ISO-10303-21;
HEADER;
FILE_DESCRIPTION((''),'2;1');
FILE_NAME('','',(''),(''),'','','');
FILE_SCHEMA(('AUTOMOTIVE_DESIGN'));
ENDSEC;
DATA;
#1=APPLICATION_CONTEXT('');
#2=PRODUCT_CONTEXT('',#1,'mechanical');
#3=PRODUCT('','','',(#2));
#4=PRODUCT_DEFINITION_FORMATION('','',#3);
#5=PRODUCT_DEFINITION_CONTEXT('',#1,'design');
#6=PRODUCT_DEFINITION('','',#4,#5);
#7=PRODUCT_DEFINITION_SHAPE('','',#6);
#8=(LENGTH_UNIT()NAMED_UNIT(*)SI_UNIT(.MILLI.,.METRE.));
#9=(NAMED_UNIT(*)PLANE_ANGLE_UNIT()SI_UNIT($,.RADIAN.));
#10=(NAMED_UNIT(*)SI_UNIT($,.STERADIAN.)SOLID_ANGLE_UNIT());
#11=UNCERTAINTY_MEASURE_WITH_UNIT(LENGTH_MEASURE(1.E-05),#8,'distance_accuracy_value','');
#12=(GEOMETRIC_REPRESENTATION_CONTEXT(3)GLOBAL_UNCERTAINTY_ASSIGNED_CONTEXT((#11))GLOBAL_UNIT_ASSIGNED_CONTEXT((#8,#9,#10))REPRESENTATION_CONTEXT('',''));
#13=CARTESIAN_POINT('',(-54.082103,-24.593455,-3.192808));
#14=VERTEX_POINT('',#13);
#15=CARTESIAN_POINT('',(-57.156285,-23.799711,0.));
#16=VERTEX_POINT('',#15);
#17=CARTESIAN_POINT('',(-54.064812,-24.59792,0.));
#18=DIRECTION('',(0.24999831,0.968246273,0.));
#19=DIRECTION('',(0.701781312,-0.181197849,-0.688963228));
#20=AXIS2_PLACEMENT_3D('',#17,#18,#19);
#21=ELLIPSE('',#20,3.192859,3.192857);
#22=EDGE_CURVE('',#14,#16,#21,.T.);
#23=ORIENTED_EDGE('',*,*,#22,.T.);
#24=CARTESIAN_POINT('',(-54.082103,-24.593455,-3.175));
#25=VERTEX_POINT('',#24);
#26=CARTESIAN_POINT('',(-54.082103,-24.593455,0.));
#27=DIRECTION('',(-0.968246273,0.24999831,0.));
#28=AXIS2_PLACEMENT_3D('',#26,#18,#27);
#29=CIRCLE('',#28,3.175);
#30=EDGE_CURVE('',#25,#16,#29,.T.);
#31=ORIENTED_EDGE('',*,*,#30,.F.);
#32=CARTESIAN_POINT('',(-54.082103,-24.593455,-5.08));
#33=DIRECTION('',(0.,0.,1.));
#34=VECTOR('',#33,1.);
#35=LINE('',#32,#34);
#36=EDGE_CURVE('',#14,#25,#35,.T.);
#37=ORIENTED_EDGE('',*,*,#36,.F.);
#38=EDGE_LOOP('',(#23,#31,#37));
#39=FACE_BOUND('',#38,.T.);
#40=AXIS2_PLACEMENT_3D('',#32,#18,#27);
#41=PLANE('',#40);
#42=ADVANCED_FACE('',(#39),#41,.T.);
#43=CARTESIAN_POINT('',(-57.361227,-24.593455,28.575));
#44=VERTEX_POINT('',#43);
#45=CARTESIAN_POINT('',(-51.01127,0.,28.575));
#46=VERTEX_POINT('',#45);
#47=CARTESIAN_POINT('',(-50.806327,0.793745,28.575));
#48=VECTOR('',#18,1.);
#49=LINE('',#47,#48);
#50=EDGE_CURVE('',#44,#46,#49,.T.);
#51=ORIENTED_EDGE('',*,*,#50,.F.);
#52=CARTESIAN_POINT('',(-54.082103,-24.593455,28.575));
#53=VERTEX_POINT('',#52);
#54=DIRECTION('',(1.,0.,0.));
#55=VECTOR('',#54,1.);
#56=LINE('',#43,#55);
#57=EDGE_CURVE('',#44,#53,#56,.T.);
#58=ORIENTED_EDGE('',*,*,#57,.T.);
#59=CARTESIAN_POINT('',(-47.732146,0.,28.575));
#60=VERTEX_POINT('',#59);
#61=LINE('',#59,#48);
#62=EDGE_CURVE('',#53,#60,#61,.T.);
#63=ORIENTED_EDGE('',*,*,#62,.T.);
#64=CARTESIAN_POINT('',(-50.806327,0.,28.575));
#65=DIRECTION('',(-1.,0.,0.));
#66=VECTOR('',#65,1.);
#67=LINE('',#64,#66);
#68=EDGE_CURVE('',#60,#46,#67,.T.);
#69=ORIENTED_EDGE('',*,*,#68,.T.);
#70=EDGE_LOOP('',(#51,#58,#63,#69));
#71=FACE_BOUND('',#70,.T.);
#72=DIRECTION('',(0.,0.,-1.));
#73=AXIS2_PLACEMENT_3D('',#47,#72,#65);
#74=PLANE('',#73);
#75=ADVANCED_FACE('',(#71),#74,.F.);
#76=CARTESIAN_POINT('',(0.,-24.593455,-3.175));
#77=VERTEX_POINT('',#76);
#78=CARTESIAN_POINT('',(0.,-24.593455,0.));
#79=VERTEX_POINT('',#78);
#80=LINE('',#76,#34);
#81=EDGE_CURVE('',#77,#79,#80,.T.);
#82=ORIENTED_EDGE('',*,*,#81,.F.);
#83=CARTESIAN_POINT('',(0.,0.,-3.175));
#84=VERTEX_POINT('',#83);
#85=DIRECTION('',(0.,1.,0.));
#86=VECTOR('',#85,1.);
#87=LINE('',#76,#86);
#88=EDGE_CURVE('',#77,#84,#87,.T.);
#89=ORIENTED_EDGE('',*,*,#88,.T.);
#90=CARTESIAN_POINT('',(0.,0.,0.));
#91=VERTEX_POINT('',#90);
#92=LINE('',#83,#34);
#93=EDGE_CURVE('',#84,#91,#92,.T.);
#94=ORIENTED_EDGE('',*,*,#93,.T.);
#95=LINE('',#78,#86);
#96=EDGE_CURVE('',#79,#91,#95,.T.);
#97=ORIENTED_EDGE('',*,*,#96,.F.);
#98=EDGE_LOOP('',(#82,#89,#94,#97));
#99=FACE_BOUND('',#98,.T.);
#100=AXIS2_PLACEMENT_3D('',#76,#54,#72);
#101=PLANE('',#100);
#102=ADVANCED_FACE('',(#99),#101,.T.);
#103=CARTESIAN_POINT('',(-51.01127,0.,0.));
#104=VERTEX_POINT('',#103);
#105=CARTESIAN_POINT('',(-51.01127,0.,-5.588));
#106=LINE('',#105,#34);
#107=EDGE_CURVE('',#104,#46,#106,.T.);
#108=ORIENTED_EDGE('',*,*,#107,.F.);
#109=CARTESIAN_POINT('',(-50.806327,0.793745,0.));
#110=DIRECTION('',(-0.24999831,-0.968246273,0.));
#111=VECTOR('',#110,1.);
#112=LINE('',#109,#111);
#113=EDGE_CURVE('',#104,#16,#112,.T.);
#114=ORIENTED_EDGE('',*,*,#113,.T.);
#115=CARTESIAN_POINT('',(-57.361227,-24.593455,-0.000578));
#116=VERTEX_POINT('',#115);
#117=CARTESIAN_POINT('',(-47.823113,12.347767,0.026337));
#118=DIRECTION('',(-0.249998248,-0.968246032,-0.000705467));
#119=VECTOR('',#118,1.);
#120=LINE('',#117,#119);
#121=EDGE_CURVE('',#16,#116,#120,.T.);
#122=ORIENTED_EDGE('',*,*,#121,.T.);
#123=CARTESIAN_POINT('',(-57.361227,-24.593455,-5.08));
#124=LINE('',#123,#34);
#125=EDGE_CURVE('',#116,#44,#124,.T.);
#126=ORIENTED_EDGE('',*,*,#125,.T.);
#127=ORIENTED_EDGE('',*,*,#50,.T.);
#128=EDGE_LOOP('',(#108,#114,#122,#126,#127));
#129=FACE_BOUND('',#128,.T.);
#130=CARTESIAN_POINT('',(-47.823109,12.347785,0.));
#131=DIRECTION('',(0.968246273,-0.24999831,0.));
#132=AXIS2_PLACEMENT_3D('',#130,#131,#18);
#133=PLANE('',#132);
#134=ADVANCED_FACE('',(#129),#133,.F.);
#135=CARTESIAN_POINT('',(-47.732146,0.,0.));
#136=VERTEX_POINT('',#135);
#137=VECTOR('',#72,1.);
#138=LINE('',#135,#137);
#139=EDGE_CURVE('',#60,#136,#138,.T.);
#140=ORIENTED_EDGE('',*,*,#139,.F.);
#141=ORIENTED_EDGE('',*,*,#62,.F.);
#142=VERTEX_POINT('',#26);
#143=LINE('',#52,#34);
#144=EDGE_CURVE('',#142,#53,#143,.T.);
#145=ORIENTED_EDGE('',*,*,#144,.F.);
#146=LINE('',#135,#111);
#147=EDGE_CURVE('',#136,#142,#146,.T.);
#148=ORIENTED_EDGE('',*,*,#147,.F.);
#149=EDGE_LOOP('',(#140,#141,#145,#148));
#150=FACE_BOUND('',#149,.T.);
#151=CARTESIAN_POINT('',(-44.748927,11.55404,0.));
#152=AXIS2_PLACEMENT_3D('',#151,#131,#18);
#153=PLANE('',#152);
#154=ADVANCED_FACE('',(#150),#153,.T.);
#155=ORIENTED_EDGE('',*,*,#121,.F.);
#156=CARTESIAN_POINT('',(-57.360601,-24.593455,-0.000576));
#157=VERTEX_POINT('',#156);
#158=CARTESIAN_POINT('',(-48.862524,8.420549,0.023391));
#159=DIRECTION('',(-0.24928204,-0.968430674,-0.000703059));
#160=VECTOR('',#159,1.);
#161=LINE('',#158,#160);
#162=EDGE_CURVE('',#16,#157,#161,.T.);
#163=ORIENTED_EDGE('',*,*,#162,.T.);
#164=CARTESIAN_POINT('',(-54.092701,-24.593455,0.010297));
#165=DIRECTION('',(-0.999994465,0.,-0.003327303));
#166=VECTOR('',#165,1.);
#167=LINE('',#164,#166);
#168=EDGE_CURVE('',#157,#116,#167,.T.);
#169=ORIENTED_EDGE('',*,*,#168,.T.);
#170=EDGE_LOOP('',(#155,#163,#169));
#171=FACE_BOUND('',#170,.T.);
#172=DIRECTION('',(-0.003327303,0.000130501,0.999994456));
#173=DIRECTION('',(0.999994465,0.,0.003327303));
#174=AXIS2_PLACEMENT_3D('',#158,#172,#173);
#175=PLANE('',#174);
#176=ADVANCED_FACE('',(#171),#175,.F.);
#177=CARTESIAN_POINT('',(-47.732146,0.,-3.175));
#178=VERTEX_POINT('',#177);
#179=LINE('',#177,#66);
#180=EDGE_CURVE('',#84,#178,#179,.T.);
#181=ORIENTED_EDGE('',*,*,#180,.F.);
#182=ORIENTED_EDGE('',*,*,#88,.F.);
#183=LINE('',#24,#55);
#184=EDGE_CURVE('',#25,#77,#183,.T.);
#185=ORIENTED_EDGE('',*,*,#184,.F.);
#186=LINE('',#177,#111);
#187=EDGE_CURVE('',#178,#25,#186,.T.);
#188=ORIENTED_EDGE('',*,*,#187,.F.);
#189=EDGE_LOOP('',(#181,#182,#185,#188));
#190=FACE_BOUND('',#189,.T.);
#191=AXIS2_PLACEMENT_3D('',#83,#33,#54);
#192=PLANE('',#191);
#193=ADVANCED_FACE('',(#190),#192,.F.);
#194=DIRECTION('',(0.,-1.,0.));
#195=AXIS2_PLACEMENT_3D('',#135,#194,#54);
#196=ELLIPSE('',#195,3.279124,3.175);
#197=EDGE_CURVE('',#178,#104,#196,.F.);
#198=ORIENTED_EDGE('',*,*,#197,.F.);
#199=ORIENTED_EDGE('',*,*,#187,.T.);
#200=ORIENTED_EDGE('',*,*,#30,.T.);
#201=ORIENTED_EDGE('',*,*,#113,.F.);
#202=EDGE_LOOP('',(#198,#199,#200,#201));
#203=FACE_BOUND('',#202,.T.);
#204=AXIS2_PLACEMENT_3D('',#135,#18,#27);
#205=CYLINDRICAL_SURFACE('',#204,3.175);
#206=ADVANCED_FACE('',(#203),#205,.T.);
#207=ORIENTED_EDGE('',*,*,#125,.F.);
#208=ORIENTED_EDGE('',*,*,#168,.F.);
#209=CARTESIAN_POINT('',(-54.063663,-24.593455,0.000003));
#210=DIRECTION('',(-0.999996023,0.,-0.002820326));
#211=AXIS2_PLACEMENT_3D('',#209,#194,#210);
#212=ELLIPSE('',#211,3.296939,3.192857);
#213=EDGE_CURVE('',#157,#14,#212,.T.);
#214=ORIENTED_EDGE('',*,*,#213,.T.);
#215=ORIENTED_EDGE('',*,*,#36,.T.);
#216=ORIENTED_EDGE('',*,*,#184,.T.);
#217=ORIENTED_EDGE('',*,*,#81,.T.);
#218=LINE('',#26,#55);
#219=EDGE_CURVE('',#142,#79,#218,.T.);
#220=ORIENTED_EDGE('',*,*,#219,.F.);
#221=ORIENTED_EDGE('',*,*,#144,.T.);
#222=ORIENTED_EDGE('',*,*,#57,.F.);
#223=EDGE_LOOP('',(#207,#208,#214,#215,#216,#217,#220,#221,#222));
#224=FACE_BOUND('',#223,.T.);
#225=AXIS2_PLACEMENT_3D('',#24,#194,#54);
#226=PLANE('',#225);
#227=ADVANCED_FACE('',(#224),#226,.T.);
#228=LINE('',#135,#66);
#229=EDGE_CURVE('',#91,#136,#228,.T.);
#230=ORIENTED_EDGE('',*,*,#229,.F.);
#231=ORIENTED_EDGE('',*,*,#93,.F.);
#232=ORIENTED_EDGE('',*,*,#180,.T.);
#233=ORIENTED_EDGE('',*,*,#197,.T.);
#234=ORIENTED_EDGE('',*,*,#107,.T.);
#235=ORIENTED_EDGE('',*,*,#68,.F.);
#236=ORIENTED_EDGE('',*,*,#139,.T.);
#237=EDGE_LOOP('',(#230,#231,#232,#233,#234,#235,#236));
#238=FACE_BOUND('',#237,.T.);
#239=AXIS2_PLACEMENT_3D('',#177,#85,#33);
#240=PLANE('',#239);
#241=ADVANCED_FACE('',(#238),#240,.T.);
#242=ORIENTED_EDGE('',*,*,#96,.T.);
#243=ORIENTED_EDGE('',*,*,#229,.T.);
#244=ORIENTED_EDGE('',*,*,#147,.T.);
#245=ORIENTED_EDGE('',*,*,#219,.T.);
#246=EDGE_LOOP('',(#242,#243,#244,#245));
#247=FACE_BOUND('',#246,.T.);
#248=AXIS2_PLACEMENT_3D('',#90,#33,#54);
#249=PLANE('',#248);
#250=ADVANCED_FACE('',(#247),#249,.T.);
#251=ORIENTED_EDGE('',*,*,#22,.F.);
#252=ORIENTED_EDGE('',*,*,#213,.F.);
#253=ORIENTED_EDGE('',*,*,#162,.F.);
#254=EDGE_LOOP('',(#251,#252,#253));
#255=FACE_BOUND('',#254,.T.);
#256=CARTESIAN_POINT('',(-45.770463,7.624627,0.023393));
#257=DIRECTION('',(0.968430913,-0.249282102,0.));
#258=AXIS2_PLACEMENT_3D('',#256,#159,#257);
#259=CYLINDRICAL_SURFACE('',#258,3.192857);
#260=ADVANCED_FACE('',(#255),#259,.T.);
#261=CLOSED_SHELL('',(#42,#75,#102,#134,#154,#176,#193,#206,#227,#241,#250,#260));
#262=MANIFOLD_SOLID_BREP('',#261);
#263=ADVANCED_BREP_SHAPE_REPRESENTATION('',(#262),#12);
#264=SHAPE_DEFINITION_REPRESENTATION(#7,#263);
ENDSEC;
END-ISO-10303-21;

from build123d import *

# Parameters (mm, degrees)
BASE_FLANGE5_DEPTH       = 3.175
EDGE_FLANGE4_START       = -37.332955736
EDGE_FLANGE4_DEPTH       = 25.4
BOSS_EXTRUDE3_DEPTH      = 28.575
BOSS_EXTRUDE3_DEPTH_BACK = 5.08
CUT_EXTRUDE4_DEPTH       = 34.925
CUT_EXTRUDE4_DEPTH_BACK  = 5.588
CUT_EXTRUDE7_DEPTH       = 33.274
CUT_EXTRUDE7_DEPTH_BACK  = 9.779


# Read off the part's stored shape, not the designer's step: Edge-Flange4
# Sheet-metal steps are written as plain solids
with BuildPart() as part:
    # Sketch13 → Base-Flange5 (new body)
    with BuildSketch(Plane.XY):
        Polygon((-47.732145582, 0), (0, 0), (0, -24.593455331), (-54.08210266, -24.593455331), align=None)
    extrude(amount=-BASE_FLANGE5_DEPTH)

    # Edge-Flange4 outline → Edge-Flange4 (add)
    with BuildSketch(Plane(origin=(0, 0, 0), x_dir=(0.9682462728649326, -0.24999831016062188, 0), z_dir=(0.24999831016062188, 0.9682462728649326, 0)).offset(EDGE_FLANGE4_START)):
        with BuildLine():
            Line((-46.216472056, -28.575), (-46.216472056, 3.175))
            ThreePointArc((-46.216472056, 3.175), (-48.461536086, 2.24506403), (-49.391472056, 0))
            Line((-49.391472056, 0), (-49.391472056, -28.575))
            Line((-49.391472056, -28.575), (-46.216472056, -28.575))
        make_face()
    extrude(amount=EDGE_FLANGE4_DEPTH)

    # Sketch50 → Boss-Extrude3 (add, two sides: drawn at the far end of the back side and taken through both)
    with BuildSketch(Plane.XY.offset(-BOSS_EXTRUDE3_DEPTH_BACK)):
        Polygon((-54.08210266, -24.593455331), (-57.156284576, -23.799710696), (-57.361227082, -24.593455331), align=None)
    extrude(amount=BOSS_EXTRUDE3_DEPTH + BOSS_EXTRUDE3_DEPTH_BACK)

    # Sketch51 → Cut-Extrude4 (cut, two sides: drawn at the far end of the back side and taken through both)
    with BuildSketch(Plane.XY.offset(-CUT_EXTRUDE4_DEPTH_BACK)):
        Polygon((-47.732145582, 0), (-51.011270004, 0), (-50.806327498, 0.793744635), align=None)
    extrude(amount=CUT_EXTRUDE4_DEPTH + CUT_EXTRUDE4_DEPTH_BACK, mode=Mode.SUBTRACT)

    # Sketch56 → Cut-Extrude7 (cut, two sides: drawn at the far end of the back side and taken through both)
    with BuildSketch(Plane(origin=(-9.298174, -36.122285036, -0.026223985), x_dir=(0.9684252131455058, -0.24928299754212324, 0.0032547934643607206), z_dir=(0.24928204027092418, 0.9684306738770053, 0.0007030593821182495)).offset(-CUT_EXTRUDE7_DEPTH_BACK)):
        with BuildLine():
            Line((-49.435258201, 4.892901472), (-46.260275882, 4.90323379))
            Line((-46.260275882, 4.90323379), (-46.235347228, 3.016163107))
            ThreePointArc((-46.235347228, 3.016163107), (-48.4905831, 2.0739806), (-49.418723851, -0.187070364))
            Line((-49.418723851, -0.187070364), (-50.079202572, -0.187070364))
            Line((-50.079202572, -0.187070364), (-50.079202572, 4.892901472))
            Line((-50.079202572, 4.892901472), (-49.435258201, 4.892901472))
        make_face()
    extrude(amount=CUT_EXTRUDE7_DEPTH + CUT_EXTRUDE7_DEPTH_BACK, mode=Mode.SUBTRACT)


solid = part.part
